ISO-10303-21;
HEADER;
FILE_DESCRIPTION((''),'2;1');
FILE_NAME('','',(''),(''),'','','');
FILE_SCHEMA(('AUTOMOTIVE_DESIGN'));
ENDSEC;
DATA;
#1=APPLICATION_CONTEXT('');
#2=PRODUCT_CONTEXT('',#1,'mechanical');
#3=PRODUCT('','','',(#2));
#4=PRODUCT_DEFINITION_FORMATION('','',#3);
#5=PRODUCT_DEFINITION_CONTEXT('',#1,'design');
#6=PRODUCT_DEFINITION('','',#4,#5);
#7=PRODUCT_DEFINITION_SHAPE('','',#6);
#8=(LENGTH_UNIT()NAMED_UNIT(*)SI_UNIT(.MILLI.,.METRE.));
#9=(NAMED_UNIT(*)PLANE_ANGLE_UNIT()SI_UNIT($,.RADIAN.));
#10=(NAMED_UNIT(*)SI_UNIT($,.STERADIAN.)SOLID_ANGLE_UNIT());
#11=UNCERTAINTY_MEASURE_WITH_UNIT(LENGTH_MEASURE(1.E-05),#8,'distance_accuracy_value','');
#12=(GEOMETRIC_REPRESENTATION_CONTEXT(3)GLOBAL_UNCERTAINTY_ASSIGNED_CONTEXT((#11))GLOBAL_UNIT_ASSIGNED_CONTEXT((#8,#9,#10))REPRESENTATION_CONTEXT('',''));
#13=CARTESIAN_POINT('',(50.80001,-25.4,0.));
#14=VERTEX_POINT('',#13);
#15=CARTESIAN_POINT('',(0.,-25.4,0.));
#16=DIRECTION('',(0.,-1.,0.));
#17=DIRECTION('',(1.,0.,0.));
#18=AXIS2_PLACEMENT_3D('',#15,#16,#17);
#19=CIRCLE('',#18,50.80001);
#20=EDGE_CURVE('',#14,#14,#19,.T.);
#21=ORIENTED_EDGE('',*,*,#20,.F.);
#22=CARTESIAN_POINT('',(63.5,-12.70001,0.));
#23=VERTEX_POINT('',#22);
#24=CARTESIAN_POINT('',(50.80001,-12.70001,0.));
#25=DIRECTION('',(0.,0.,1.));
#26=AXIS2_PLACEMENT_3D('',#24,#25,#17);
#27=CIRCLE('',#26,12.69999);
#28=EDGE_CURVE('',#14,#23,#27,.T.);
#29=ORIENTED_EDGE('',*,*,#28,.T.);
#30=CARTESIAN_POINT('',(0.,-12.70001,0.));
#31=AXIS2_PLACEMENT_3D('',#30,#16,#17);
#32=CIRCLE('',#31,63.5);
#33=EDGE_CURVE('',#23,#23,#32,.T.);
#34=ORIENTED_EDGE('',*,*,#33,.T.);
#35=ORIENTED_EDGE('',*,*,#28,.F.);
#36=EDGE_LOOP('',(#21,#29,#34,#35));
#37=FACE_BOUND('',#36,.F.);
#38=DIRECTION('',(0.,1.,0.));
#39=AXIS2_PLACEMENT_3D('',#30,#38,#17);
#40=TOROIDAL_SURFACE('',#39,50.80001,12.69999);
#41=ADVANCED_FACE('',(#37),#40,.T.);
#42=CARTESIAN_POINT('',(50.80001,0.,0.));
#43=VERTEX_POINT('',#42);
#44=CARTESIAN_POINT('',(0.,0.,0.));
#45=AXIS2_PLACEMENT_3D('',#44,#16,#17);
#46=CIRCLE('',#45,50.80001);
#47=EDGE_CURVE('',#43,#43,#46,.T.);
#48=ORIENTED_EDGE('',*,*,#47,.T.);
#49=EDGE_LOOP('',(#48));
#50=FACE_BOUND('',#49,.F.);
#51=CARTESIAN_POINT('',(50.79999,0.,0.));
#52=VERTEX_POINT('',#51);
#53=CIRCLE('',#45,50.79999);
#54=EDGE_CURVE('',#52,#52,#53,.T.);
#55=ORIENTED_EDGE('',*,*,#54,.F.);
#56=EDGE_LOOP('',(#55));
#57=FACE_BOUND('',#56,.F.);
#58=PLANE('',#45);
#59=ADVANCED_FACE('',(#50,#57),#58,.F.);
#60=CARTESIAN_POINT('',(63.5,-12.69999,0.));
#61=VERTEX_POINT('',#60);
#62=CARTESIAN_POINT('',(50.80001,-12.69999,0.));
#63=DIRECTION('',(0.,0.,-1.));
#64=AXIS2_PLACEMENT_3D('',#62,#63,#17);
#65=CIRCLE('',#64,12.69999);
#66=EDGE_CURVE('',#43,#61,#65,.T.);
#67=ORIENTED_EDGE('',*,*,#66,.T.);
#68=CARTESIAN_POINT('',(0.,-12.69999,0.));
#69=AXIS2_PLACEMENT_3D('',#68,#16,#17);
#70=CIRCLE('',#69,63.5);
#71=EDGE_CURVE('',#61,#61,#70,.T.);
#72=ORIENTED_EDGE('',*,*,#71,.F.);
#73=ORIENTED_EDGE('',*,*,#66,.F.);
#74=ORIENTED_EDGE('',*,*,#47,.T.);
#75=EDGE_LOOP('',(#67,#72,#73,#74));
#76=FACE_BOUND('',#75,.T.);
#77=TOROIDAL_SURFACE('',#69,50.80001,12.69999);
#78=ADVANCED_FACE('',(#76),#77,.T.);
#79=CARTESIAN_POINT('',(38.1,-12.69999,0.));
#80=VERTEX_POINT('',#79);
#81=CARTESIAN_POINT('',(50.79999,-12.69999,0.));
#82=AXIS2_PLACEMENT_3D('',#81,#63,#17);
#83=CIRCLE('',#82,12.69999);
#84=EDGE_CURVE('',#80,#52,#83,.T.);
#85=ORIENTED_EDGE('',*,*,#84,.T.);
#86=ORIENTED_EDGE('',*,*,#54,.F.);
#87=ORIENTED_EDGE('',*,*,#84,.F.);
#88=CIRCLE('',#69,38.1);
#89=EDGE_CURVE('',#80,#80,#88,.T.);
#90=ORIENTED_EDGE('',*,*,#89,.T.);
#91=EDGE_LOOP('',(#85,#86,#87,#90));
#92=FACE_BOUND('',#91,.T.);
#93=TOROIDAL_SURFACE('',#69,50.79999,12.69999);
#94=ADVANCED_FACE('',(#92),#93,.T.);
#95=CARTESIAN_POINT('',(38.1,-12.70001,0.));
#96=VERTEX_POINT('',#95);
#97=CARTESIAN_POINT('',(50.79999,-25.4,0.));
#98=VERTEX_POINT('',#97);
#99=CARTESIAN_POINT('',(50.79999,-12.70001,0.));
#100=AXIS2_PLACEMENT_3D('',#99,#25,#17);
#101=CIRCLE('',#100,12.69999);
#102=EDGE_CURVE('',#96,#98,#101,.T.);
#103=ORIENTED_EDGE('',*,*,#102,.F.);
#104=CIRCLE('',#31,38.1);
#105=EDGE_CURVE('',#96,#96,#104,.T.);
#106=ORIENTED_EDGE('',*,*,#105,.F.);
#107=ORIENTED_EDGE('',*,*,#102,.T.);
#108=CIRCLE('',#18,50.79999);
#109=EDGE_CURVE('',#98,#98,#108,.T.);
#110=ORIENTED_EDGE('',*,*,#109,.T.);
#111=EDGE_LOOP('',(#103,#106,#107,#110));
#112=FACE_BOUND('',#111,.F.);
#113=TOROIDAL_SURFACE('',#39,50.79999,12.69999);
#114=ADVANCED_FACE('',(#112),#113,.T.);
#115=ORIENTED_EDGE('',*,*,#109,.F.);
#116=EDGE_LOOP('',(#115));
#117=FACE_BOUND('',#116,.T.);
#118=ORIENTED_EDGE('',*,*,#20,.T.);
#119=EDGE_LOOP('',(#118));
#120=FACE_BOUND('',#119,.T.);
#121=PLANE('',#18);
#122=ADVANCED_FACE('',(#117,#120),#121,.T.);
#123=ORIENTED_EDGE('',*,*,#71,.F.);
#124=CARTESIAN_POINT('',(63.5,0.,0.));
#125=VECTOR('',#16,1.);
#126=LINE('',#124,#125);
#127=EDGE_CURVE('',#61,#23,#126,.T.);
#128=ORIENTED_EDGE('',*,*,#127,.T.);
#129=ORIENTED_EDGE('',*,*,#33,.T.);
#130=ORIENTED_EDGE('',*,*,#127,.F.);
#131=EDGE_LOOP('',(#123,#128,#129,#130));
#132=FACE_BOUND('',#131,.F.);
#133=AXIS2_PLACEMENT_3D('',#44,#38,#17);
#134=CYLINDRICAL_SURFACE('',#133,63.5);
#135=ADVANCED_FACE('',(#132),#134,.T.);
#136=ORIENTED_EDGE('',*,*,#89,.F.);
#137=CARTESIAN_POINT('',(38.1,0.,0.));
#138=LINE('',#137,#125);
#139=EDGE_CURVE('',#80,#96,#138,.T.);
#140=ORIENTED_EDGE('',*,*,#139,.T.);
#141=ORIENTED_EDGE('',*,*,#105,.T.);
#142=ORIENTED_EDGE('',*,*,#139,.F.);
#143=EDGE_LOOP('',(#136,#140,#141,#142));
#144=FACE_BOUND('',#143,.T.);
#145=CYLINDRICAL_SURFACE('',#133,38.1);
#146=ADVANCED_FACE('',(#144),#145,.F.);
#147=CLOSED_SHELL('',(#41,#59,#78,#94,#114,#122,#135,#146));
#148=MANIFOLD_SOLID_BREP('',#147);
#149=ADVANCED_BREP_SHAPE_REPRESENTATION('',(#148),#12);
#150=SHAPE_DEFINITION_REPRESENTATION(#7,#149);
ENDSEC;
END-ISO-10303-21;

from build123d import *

# Parameters (mm, degrees)
F0_R     = 63.5
F0_R_2   = 38.1
F1_DEPTH = 25.4
F2_R     = 12.69999
F3_R     = 12.69999


# Not quite as in the source:
# - a fillet or chamfer is up to 0.001 mm smaller than in the source, because OpenCascade refuses the exact size


with BuildPart() as f1:
    # F0 (on Front) → F1 (new body)
    with BuildSketch(Plane.XZ):
        Circle(F0_R)
        Circle(F0_R_2, mode=Mode.SUBTRACT)
    extrude(amount=F1_DEPTH)

    # F2 (radius 12.7 in the source; OpenCascade refuses exactly that, so slightly less here)
    f2_edges = [f1.edges().sort_by_distance(p)[0] for p in [
        (-38.1, -25.4, 0),
        (-38.1, 0, 0),
    ]]
    fillet(f2_edges, radius=F2_R)

    # F3 (radius 12.7 in the source; OpenCascade refuses exactly that, so slightly less here)
    f3_edges = [f1.edges().sort_by_distance(p)[0] for p in [
        (-63.5, -25.4, 0),
        (-63.5, 0, 0),
    ]]
    fillet(f3_edges, radius=F3_R)


solid = f1.part
